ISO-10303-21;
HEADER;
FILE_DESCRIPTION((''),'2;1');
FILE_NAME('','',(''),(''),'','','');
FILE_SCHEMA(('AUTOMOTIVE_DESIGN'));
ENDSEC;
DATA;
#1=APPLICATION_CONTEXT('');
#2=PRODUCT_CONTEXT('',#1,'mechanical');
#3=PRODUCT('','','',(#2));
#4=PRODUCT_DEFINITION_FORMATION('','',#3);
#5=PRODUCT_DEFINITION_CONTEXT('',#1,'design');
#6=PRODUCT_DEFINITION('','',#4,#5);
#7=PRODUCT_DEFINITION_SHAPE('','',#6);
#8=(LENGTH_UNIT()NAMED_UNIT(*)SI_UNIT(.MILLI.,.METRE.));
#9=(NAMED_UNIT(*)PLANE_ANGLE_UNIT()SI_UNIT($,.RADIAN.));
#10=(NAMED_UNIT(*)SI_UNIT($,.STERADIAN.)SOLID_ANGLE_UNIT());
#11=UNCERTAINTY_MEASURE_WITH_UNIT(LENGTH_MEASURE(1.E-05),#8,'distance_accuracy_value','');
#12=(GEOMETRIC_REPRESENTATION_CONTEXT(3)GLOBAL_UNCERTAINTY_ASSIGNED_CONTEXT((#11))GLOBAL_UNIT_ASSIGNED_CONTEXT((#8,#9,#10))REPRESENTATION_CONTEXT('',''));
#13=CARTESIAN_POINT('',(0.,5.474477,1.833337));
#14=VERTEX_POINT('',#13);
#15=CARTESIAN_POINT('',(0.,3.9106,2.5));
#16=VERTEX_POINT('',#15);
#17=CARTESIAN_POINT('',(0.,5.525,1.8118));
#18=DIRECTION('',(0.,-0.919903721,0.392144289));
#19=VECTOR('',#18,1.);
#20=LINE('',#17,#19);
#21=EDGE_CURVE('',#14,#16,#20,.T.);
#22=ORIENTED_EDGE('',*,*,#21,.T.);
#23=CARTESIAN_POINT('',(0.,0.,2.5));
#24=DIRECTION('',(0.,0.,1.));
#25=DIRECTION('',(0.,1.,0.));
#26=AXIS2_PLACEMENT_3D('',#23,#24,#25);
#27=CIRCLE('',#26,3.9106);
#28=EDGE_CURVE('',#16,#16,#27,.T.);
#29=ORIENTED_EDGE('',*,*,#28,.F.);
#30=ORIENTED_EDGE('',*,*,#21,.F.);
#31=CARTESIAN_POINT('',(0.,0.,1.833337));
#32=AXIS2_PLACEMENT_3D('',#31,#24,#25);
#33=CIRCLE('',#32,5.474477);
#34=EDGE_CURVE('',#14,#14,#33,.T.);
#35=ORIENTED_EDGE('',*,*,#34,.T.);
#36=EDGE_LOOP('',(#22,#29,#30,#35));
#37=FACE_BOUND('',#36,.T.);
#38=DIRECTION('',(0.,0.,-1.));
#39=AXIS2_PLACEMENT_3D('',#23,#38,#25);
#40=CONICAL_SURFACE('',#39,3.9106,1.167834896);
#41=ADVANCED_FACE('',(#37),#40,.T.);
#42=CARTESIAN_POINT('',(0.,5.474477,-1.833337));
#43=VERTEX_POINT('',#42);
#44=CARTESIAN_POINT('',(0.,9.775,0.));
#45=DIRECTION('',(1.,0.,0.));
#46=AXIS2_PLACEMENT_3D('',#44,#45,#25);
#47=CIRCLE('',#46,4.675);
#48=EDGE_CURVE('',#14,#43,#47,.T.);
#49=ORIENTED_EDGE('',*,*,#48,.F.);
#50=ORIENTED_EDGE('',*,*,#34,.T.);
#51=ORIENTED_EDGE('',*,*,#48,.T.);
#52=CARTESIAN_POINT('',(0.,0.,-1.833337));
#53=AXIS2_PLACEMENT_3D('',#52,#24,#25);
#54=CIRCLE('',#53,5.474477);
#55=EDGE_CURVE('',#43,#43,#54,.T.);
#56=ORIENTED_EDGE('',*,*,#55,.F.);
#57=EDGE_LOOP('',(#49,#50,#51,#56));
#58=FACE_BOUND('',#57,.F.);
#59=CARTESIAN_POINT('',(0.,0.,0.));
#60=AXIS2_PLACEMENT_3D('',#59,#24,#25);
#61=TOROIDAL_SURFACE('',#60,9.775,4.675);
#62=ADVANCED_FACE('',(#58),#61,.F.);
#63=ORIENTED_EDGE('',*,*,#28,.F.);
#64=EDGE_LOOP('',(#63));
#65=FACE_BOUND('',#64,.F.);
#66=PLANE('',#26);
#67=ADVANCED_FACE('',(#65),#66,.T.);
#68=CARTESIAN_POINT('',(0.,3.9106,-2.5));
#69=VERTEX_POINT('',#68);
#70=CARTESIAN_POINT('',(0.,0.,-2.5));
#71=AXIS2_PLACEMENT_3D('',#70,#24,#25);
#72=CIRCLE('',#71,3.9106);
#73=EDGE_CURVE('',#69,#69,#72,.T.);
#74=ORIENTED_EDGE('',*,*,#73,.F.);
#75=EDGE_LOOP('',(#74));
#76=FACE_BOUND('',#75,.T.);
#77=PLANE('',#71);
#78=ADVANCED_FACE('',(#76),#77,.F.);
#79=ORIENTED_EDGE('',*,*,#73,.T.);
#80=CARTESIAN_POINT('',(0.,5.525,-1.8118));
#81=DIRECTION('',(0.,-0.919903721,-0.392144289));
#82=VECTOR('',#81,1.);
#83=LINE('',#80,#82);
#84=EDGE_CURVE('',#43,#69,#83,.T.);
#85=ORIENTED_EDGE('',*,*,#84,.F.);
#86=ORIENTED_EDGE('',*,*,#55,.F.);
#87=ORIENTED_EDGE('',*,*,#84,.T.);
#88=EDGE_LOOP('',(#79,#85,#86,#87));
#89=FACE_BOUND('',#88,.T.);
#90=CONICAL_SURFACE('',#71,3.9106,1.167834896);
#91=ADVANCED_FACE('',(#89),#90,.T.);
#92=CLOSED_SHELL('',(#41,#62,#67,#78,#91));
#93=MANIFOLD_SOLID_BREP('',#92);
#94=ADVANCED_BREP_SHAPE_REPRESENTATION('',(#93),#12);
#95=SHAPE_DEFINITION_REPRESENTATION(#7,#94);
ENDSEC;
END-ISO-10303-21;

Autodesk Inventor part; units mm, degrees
ref_plane "Zahnebene" through (0, -10, 0) normal (-0.2940858, 0, 0.955779) x (0, 1, 0)
sketch "Grundkörperskizze" plane through (0, 0, 0) normal (1, 0, 0) x (0, 1, 0)
  line L0 (0, -5.95) -> (0, 5.95) projected
  line L1 (0, 2.5) -> (3.9106, 2.5)
  line L2 (3.9106, 2.5) -> (5.525, 1.8118)
  line L3 (-2.72, 0) -> (16.32, 0) construction
  circle A0 centre (9.775, 0) radius 4.675
  line L4 (5.525, 1.8118) -> (5.525, -1.8118)
  line L5 (0, -2.5) -> (3.9106, -2.5)
  line L6 (0, 2.5) -> (0, -2.5)
  line L7 (3.9106, -2.5) -> (5.525, -1.8118)
  dimension "d50" = 23.089
  dimension "d87" = 11.05
  dimension "d89" = 9.35
  dimension "d92" = 5
  dimension "d93" = 9.775
revolve "Grundkörper" add sketch "Grundkörperskizze" angle 360 about axis through (0, 0, 0) along (0, 0, 1) picked at (5.4149, 0.3119) contours L0 L1 L2 A0 L7 L5 | A0 L2 L4 L7
revolve "Grundkörper2" cut sketch "Grundkörperskizze" angle 360 about axis through (0, 0, 0) along (0, 0, 1) contours L7 L4 L2 A0 | A0 L2 L4 L7
sketch "Zahnskizze" plane through (0, -10, 0) normal (-0.2940858, 0, 0.955779) x (0, 1, 0)
  line L0 (10, 1.6413) -> (10, -1.6413) projected
  line L1 (-0.574, 0) -> (7.994, 0) projected
  line L2 (0.225, 1.1724) -> (0.225, -1.1724)
  line L3 (0.225, -1.1724) -> (4.73, -1.1724)
  line L4 (4.73, -1.1724) -> (6.77, -0.4299)
  line L5 (6.77, -0.4299) -> (6.77, 0)
  line L6 (6.77, 0.4299) -> (4.73, 1.1724)
  line L7 (4.73, 1.1724) -> (0.225, 1.1724)
  line L8 (6.77, 0.4299) -> (6.77, 0)
  line L9 (5.75, 0) -> (5.75, -0.8011) construction
  dimension "d38" = 9.775
  dimension "d39" = 20
  dimension "d40" = 4.505
  dimension "d41" = 5.525
  dimension "d42" = 0.8011
sketch "Sketch8" plane through (0, 0, 2.5) normal (0, 0, 1) x (1, 0, 0)
  circle A0 centre (0, 0) radius 3.9106 projected
  circle A1 centre (0, 0) radius 4.25
  dimension "d77" = 8.5
surface extrude "Flankendurchmesser" sketch "Sketch8" against normal blind 5 shown no curves A1
ref_plane "Work Plane13" through (0, 0, 0) normal (-0.309017, 0.9510565, 0) x (0, 0, 1)
revolve "Zahn" [suppressed]
pattern_circular "Zahnanordnung" [suppressed]
ref_plane "Work Plane14" through (0, 0, 0) normal (0.9510565, 0.309017, 0) x (0, 0, 1)
ref_plane "Work Plane15" through (0, 0, 0) normal (0, -1, 0) x (0, 0, 1)
equation "\"d50\" = da_fi"
equation "\"d87\" = da_dae"
equation "\"d89\" = 2 * da_aw - da_da"
equation "\"d92\" = da_b"
equation "\"d93\" = da_aw"
equation "\"d38\" = da_aw"
equation "\"d39\" = da_alfat"
equation "\"d40\" = 0.5 * da_df1"
equation "\"d41\" = 0.5 * da_d1"
equation "\"d42\" = 0.3 * da_px"
equation "\"d77\" = da_dw"
equation "\"d78\" = da_b"
equation "\"da_aw\" = 9.775"
equation "\"da_fi\" = 23.0888deg"
equation "\"da_b\" = 5"
equation "\"da_df\" = 6.46"
equation "\"da_da\" = 10.2"
equation "\"da_beta\" = 17.102729deg"
equation "\"da_alfat\" = 20deg"
equation "\"da_df1\" = 9.01"
equation "\"da_da1\" = 12.75"
equation "\"da_d1\" = 11.05"
equation "\"da_px\" = 2.67035"
equation "\"d68\" = da_aw"
equation "\"da_dw\" = 8.5"
equation "\"da_rightdir\" = 0"
equation "\"d86\" = da_aw"
equation "\"da_dae\" = 11.05"
properties part number "Schneckenrad" material "Steel, Mild"
